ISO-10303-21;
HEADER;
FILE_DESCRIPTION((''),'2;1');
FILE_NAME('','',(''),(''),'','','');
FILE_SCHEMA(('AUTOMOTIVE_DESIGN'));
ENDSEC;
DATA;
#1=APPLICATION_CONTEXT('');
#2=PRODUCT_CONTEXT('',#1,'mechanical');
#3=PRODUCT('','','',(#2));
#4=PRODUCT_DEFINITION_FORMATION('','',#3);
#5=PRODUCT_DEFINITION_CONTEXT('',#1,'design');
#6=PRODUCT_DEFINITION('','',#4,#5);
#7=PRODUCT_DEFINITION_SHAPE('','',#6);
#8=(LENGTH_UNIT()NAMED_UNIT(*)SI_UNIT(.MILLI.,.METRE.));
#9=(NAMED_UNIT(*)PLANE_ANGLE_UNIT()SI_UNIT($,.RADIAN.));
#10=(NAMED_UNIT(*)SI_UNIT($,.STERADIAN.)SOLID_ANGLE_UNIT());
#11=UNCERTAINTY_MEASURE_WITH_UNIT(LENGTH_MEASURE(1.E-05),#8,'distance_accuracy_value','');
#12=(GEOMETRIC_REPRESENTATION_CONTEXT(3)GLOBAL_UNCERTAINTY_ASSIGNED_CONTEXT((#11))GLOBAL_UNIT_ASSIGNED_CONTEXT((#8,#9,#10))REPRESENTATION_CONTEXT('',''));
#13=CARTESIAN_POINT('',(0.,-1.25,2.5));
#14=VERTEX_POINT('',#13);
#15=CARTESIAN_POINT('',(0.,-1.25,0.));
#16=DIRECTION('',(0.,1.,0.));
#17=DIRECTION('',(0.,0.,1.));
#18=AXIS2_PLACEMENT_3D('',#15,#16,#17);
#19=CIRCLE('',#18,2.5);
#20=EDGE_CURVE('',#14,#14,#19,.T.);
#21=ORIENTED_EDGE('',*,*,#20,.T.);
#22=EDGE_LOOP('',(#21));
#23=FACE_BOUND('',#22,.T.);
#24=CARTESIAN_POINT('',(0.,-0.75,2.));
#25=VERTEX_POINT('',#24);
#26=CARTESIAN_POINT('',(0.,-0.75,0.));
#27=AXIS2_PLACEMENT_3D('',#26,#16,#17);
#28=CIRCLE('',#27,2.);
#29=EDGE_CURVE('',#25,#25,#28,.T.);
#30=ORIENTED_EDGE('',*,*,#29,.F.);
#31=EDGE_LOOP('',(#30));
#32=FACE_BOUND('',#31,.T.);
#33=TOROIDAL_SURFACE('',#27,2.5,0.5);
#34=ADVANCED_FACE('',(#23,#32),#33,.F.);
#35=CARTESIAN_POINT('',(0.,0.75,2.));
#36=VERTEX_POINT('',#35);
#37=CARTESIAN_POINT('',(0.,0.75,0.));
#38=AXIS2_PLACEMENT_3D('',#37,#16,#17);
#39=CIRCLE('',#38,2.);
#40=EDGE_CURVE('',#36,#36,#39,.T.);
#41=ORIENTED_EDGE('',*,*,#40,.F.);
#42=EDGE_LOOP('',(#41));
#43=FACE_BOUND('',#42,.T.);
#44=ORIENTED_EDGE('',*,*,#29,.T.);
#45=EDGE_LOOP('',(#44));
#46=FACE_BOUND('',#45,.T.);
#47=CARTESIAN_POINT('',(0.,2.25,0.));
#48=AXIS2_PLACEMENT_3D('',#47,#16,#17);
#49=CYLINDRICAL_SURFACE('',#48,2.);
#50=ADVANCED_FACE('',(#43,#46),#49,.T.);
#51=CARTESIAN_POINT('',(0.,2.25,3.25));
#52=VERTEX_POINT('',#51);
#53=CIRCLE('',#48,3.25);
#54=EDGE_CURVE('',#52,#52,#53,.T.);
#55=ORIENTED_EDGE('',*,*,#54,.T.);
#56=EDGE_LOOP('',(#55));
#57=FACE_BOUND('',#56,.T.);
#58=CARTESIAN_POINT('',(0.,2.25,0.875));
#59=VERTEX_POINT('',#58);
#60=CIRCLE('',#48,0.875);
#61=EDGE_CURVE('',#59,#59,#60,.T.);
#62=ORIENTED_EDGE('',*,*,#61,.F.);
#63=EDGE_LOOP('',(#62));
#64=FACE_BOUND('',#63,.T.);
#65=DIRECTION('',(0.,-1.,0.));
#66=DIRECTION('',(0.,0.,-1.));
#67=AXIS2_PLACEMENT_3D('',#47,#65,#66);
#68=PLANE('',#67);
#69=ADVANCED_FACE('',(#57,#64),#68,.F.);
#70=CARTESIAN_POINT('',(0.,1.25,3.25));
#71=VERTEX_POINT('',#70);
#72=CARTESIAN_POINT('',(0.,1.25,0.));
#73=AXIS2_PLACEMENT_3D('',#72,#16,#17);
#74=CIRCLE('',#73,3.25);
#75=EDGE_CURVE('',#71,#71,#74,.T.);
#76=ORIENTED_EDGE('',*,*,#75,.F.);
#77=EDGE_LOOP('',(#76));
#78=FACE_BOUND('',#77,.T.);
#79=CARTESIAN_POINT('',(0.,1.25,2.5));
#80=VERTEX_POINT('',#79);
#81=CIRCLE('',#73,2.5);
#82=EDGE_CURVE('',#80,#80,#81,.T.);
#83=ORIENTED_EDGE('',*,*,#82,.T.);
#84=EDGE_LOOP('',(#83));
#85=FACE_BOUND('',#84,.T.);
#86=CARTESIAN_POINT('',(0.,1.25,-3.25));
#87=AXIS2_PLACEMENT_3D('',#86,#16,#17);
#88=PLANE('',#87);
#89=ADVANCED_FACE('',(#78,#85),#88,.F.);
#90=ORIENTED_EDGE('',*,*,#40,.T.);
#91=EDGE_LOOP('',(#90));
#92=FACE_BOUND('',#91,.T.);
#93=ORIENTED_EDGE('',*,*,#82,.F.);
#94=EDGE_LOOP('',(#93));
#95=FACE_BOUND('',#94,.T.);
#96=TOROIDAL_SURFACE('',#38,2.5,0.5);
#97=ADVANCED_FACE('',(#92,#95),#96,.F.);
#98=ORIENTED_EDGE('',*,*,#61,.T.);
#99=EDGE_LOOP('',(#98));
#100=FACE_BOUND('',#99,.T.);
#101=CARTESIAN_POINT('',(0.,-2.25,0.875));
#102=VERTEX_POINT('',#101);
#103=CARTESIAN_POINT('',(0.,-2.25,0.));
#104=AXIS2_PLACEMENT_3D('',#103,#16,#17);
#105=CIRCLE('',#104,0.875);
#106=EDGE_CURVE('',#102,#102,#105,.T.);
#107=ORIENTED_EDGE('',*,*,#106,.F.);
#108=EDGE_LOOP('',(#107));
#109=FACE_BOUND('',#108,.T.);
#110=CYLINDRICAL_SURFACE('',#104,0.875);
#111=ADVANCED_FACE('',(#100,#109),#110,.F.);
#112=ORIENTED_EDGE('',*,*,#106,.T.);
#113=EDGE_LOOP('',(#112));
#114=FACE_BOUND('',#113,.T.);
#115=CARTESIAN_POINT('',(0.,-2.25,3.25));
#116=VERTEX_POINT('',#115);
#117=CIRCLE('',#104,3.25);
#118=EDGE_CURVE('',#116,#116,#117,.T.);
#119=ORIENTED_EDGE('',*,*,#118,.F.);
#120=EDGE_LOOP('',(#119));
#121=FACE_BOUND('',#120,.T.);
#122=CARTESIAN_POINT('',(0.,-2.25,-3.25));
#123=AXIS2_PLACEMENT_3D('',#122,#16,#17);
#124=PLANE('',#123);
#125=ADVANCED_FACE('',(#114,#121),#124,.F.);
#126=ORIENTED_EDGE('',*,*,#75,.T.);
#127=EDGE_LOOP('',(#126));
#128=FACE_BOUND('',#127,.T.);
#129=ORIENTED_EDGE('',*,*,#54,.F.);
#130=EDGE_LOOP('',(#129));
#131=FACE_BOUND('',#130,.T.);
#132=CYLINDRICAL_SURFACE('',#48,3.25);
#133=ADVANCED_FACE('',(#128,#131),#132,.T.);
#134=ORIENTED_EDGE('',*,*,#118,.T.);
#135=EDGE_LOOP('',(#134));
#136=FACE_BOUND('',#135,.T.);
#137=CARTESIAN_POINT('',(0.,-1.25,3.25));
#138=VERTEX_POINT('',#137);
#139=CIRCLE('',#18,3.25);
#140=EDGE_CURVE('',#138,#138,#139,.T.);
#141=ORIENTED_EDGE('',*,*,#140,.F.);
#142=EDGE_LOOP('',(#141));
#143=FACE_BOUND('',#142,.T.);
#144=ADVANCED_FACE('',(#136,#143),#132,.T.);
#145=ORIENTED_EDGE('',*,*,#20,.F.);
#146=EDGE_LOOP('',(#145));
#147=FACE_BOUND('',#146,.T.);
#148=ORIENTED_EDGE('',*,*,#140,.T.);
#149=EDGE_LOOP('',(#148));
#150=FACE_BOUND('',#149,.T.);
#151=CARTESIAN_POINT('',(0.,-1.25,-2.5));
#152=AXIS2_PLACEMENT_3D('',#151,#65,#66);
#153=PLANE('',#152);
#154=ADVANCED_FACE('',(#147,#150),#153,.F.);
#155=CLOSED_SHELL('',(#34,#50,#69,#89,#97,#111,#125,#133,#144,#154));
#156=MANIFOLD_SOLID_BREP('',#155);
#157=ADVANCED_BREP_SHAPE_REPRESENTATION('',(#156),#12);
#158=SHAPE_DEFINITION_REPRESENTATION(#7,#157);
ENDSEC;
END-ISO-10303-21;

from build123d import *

# Parameters (mm, degrees)
HUB_START          = -2.25
HUB_HOLE_OUTLINE_R = 0.875
HUB_HOLE_DEPTH     = 4.5


# Read off the part's stored shape, not the designer's step: Hub Hole
with BuildPart() as part:
    # Sketch3 → Revolve1 (revolve)
    with BuildSketch(Plane(origin=(0, 0, 0), x_dir=(0, 0, -1), z_dir=(1, 0, 0)), mode=Mode.PRIVATE) as revolve1_sk:
        with BuildLine():
            Line((0, 2.25), (3.25, 2.25))
            Line((3.25, 2.25), (3.25, 1.25))
            Line((3.25, 1.25), (2.5, 1.25))
            ThreePointArc((2.5, 1.25), (2.146446609, 1.103553391), (2, 0.75))
            Line((2, 0.75), (2, -0.75))
            ThreePointArc((2, -0.75), (2.146446609, -1.103553391), (2.5, -1.25))
            Line((2.5, -1.25), (3.25, -1.25))
            Line((3.25, -1.25), (3.25, -2.25))
            Line((3.25, -2.25), (0, -2.25))
            Line((0, -2.25), (0, 2.25))
        make_face()
    revolve(revolve1_sk.sketch.rotate(Axis((0, 2.25, 0), (0, -1, 0)), 180), axis=Axis((0, 2.25, 0), (0, -1, 0)))

    # Hub Hole outline → Hub Hole (cut)
    with BuildSketch(Plane(origin=(0, 0, 0), x_dir=(1, 0, 0), z_dir=(0, 1, 0)).offset(HUB_START)):
        Circle(HUB_HOLE_OUTLINE_R)
    extrude(amount=HUB_HOLE_DEPTH, mode=Mode.SUBTRACT)


solid = part.part
